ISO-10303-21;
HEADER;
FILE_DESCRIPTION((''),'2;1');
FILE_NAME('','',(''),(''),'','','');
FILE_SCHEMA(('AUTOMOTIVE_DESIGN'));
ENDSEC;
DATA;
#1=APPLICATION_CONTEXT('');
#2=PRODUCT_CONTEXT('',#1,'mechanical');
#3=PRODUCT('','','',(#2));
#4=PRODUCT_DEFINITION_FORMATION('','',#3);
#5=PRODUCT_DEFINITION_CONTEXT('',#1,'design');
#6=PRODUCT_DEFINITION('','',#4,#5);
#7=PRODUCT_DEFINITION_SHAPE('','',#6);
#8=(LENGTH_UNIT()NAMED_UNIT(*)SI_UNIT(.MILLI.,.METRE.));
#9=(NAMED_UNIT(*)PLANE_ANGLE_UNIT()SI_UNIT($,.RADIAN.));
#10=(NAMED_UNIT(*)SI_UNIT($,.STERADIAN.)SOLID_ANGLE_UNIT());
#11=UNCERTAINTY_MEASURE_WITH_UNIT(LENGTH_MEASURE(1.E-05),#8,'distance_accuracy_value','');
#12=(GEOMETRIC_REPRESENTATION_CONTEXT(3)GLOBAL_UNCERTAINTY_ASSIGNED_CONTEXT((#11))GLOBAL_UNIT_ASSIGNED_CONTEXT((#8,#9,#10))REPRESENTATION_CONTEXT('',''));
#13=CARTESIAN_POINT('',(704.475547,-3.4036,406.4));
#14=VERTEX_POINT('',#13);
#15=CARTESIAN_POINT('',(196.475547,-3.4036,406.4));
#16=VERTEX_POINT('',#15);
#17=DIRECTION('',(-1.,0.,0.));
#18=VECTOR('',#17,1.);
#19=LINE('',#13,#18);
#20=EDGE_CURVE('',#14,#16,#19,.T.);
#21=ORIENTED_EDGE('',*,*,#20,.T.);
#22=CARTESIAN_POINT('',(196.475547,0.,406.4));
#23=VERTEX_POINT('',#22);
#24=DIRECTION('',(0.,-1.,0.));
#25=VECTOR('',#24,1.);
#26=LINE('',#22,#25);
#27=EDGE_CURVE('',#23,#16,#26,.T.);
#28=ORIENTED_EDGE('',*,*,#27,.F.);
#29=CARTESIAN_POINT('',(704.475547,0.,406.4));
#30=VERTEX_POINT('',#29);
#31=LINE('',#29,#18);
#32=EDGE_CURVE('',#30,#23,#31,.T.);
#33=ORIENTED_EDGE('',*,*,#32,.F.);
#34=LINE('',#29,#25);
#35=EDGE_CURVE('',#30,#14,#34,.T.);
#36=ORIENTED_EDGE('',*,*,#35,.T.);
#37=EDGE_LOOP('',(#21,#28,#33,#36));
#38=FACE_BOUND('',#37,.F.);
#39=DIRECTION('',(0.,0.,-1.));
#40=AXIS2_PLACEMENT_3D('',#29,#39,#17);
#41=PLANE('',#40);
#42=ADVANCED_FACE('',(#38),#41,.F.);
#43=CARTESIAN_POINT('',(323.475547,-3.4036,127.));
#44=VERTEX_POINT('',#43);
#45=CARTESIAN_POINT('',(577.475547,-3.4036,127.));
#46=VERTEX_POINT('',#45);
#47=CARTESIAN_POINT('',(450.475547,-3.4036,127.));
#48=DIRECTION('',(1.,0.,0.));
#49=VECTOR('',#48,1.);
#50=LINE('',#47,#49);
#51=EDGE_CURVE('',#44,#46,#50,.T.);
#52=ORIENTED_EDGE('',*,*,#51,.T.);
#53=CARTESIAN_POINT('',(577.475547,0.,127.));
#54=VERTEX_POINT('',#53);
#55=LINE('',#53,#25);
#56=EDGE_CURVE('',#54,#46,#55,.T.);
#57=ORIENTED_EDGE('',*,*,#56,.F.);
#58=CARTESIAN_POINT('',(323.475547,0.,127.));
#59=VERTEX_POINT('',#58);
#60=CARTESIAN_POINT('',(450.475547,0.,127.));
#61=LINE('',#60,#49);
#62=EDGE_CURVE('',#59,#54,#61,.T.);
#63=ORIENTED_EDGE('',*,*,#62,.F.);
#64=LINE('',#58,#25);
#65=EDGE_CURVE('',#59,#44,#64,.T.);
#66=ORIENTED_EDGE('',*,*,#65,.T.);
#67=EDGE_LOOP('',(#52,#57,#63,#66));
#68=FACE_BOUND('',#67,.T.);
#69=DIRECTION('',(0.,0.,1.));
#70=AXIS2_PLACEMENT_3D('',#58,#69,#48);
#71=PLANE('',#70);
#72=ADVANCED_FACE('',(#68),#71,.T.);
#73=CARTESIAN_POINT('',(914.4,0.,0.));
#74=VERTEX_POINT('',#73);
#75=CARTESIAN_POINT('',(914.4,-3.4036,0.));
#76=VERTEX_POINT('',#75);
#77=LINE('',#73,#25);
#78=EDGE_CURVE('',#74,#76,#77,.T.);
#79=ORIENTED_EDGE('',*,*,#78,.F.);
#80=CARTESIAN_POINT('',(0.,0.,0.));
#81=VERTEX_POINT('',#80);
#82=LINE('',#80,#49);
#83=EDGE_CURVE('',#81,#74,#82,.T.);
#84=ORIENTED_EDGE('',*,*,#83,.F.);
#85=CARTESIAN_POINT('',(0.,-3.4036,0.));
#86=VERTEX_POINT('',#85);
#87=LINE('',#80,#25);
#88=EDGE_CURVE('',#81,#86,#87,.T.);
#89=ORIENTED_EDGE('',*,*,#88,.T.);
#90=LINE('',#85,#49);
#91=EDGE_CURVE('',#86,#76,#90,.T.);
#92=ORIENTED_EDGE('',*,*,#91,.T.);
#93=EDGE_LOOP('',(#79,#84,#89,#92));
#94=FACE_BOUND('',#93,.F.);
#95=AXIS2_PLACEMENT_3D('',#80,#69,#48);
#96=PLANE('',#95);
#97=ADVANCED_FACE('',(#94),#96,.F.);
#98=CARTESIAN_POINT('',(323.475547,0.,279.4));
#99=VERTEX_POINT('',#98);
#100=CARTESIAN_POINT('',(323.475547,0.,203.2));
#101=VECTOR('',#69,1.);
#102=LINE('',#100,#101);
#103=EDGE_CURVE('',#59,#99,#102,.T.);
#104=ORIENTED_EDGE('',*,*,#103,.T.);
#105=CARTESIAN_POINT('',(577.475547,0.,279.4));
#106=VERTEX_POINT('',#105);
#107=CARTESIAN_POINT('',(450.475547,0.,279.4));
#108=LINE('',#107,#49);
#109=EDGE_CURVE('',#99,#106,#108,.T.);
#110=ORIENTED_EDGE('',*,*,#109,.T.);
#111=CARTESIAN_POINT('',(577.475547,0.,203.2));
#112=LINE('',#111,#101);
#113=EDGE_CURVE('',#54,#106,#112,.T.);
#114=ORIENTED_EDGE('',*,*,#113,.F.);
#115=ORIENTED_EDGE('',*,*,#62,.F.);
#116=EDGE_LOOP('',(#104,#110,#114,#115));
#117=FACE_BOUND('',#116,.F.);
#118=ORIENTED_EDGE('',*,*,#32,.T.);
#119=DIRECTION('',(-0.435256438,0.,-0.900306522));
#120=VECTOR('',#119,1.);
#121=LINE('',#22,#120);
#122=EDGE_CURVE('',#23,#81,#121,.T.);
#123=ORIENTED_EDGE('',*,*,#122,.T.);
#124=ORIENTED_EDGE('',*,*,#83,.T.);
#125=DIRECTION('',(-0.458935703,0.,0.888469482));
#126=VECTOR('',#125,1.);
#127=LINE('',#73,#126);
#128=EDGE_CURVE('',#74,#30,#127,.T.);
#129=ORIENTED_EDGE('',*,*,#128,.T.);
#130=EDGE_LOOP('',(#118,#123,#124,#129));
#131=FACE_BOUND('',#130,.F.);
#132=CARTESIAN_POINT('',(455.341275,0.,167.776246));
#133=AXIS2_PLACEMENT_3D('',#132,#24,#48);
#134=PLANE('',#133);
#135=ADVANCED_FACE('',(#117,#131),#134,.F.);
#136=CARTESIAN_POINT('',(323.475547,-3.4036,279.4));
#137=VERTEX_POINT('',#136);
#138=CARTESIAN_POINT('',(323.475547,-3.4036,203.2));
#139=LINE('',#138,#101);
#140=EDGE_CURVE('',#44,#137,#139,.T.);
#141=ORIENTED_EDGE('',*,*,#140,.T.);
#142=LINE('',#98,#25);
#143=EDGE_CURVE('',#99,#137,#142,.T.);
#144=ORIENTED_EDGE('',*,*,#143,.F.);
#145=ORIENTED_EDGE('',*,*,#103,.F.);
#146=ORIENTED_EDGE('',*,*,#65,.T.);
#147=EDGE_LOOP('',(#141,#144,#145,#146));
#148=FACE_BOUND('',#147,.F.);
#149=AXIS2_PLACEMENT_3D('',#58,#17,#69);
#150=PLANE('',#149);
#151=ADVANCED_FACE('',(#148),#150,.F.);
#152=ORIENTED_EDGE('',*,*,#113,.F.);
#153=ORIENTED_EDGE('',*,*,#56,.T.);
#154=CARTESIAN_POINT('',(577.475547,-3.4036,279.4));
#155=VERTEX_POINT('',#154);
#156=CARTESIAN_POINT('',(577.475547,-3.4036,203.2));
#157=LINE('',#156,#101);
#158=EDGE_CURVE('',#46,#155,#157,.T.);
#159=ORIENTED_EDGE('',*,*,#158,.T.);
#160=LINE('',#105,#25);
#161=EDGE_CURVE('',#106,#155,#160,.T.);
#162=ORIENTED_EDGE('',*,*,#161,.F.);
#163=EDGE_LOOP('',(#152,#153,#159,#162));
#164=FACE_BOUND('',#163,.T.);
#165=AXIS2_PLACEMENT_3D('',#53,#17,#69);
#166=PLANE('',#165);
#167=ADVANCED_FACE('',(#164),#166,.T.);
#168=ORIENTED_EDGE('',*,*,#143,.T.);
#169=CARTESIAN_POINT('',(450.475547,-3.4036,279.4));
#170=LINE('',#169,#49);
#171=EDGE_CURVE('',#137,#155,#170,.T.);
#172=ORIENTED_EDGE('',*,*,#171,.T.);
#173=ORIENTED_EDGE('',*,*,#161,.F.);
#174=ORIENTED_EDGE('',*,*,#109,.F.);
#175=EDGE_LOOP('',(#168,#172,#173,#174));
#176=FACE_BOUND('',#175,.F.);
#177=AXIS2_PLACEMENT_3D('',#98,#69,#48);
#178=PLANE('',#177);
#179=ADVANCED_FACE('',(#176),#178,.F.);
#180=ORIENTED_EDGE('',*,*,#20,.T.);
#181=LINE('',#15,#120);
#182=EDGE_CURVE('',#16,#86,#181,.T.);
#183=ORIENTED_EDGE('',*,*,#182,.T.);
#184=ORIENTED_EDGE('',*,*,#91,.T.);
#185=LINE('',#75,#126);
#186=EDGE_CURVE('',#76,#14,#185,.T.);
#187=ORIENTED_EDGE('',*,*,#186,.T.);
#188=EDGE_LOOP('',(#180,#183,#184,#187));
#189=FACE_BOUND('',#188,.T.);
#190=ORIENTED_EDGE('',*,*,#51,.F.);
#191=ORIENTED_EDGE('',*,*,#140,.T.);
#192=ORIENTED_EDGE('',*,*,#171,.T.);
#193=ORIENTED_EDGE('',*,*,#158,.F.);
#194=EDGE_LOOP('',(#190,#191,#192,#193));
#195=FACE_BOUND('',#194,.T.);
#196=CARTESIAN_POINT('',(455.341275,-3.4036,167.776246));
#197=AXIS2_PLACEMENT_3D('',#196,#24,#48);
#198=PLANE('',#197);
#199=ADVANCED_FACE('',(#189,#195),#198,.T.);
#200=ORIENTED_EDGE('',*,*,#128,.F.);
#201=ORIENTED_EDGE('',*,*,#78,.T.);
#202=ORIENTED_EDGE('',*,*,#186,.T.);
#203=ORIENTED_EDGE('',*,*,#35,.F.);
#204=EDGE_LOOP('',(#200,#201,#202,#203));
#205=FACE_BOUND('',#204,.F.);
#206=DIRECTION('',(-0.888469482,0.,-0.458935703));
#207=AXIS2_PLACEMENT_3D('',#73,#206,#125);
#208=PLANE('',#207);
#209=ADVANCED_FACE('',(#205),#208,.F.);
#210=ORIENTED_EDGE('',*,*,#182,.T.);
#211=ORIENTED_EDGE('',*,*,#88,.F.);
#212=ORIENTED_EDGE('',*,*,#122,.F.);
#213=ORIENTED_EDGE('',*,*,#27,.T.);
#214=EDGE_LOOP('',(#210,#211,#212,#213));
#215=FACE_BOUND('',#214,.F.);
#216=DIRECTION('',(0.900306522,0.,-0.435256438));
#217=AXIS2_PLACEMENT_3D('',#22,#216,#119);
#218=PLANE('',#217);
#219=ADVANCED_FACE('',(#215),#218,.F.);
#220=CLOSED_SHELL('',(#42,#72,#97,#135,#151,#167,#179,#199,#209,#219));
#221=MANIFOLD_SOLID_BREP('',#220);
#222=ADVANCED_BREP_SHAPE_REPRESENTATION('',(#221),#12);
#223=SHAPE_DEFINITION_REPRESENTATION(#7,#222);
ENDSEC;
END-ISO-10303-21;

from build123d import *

# Parameters (mm, degrees)
F0_W     = 254
F0_H     = 152.4
F1_DEPTH = 3.4036


# Not quite as in the source:
# - a feature names something its author has since deleted; it is built from what else it names


with BuildPart() as f1:
    # F0 (on Front) → F1 (new body)
    with BuildSketch(Plane.XZ):
        Polygon((196.4755472482, 406.4), (0, 0), (914.4, 0), (704.4755472482, 406.4), align=None)
        with Locations((450.4755472482, 203.2)):
            Rectangle(F0_W, F0_H, mode=Mode.SUBTRACT)
    extrude(amount=F1_DEPTH)


solid = f1.part
